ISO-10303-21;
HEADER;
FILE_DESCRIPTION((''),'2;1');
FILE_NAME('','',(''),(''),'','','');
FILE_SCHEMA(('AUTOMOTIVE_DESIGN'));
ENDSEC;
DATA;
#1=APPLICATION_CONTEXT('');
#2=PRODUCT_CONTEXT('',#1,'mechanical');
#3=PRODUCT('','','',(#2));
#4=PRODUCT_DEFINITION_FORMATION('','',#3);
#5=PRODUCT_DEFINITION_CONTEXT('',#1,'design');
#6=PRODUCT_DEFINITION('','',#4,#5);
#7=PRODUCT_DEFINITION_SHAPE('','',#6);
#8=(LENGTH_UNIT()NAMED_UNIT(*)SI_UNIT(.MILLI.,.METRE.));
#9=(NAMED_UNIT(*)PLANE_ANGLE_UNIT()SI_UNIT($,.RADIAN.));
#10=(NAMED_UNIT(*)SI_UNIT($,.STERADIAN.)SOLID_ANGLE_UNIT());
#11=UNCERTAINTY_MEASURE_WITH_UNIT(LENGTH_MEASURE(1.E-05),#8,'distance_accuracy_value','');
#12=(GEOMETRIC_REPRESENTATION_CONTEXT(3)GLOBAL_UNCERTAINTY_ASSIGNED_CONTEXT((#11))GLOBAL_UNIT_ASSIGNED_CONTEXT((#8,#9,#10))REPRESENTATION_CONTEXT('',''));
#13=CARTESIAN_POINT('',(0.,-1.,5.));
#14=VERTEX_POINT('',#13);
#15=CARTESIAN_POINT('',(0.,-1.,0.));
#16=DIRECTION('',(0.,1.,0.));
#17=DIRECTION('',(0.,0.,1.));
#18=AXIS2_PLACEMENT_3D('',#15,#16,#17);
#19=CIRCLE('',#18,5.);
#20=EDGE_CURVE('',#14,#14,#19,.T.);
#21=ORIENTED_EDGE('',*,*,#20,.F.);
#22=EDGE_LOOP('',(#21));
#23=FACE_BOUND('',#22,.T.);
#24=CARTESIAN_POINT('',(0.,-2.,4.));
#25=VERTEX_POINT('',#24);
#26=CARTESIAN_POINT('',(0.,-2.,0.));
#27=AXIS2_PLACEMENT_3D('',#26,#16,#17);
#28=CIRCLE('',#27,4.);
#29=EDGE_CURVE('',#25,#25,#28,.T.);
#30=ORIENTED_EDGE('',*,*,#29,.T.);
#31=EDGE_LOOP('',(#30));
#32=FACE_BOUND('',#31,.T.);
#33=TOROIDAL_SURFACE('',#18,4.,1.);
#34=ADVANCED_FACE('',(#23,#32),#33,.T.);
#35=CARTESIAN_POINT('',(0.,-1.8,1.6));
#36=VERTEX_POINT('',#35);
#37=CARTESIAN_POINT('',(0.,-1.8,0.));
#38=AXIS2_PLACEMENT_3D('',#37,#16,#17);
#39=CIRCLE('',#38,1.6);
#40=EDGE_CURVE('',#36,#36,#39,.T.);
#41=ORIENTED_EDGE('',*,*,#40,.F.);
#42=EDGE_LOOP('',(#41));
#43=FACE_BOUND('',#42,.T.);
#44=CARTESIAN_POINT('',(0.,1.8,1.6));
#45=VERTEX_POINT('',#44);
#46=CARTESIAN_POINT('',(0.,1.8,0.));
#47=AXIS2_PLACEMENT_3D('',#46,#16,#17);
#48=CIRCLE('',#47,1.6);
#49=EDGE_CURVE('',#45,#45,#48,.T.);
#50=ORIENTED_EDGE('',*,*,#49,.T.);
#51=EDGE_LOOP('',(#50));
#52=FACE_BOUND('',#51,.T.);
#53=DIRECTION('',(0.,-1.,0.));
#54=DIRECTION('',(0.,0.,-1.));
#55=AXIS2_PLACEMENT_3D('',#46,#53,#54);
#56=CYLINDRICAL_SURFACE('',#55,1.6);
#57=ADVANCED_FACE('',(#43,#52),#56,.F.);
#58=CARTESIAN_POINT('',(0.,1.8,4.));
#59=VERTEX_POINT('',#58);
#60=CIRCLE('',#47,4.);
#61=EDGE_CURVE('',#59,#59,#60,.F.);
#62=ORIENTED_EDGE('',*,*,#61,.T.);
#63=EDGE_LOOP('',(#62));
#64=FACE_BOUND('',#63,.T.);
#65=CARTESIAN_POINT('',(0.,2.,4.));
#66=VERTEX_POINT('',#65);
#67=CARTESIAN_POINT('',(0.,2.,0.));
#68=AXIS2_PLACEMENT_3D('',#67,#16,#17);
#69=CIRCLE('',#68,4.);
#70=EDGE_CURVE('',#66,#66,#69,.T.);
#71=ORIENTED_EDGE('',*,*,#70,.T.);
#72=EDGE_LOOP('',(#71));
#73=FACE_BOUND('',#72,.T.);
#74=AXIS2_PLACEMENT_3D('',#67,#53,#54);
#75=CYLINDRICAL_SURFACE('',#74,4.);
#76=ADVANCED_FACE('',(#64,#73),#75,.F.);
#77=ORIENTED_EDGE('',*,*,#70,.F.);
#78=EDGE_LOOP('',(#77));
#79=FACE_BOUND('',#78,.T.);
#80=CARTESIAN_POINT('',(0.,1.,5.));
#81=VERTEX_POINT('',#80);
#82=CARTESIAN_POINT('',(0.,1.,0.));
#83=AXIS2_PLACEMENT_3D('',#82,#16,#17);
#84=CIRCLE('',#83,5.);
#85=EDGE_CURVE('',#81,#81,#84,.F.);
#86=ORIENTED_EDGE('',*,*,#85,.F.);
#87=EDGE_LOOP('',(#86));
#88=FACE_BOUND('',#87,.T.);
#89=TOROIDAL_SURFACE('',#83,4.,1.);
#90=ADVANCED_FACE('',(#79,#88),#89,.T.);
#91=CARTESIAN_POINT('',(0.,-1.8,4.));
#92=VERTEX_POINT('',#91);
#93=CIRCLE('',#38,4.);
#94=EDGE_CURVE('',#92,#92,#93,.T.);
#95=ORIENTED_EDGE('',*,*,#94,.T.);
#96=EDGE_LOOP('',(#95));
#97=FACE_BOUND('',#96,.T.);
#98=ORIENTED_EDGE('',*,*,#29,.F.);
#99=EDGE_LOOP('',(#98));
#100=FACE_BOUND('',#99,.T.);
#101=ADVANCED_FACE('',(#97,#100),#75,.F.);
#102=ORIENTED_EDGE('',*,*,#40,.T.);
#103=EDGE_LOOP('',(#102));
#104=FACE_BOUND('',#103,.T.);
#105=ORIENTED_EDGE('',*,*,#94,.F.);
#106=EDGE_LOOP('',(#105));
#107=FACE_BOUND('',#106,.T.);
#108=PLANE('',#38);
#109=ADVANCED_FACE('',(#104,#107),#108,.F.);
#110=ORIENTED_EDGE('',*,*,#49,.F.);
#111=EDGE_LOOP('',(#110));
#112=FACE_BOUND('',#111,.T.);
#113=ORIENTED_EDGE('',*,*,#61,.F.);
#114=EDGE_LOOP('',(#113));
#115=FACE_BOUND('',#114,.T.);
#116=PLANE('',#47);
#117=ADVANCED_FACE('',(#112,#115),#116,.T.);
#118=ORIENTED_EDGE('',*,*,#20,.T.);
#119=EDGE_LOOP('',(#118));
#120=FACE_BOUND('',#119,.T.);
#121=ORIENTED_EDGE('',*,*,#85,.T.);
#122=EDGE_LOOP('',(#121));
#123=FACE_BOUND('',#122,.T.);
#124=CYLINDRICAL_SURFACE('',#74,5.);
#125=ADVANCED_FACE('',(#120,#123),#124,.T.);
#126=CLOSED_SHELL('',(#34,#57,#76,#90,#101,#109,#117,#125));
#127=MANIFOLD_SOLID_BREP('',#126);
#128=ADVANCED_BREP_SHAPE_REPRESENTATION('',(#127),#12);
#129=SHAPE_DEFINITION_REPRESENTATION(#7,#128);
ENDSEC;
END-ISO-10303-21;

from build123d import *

# Parameters (mm, degrees)
SKETCH_1_R      = 4
SKETCH_1_R_2    = 1.6
EXTRUDE_1_DEPTH = 1.8
SKETCH_2_R      = 5
SKETCH_2_R_2    = 4
EXTRUDE_2_DEPTH = 2
FILLET_1_R      = 1


with BuildPart() as part:
    # 草图1 → 凸台-拉伸1 (new, symmetric)
    with BuildSketch(Plane(origin=(0, 0, 0), x_dir=(1, 0, 0), z_dir=(0, 1, 0))):
        with Locations(Location((0, 0, 0), (0, 0, 270))):
            Circle(SKETCH_1_R)
        with Locations(Location((0, 0, 0), (0, 0, 270))):
            Circle(SKETCH_1_R_2, mode=Mode.SUBTRACT)
    extrude(amount=EXTRUDE_1_DEPTH, both=True)

    # 草图2 → 凸台-拉伸2 (add, symmetric)
    with BuildSketch(Plane(origin=(0, 0, 0), x_dir=(1, 0, 0), z_dir=(0, 1, 0))):
        with Locations(Location((0, 0, 0), (0, 0, 270))):
            Circle(SKETCH_2_R)
        with Locations(Location((0, 0, 0), (0, 0, 270))):
            Circle(SKETCH_2_R_2, mode=Mode.SUBTRACT)
    extrude(amount=EXTRUDE_2_DEPTH, both=True)

    # 圆角1
    fillet_1_edges = [part.edges().sort_by_distance(p)[0] for p in [
        (0, -2, -5),
        (0, 2, -5),
    ]]
    fillet(fillet_1_edges, radius=FILLET_1_R - 0.0001)  # a hair under: the kernel refuses the full size


solid = part.part
